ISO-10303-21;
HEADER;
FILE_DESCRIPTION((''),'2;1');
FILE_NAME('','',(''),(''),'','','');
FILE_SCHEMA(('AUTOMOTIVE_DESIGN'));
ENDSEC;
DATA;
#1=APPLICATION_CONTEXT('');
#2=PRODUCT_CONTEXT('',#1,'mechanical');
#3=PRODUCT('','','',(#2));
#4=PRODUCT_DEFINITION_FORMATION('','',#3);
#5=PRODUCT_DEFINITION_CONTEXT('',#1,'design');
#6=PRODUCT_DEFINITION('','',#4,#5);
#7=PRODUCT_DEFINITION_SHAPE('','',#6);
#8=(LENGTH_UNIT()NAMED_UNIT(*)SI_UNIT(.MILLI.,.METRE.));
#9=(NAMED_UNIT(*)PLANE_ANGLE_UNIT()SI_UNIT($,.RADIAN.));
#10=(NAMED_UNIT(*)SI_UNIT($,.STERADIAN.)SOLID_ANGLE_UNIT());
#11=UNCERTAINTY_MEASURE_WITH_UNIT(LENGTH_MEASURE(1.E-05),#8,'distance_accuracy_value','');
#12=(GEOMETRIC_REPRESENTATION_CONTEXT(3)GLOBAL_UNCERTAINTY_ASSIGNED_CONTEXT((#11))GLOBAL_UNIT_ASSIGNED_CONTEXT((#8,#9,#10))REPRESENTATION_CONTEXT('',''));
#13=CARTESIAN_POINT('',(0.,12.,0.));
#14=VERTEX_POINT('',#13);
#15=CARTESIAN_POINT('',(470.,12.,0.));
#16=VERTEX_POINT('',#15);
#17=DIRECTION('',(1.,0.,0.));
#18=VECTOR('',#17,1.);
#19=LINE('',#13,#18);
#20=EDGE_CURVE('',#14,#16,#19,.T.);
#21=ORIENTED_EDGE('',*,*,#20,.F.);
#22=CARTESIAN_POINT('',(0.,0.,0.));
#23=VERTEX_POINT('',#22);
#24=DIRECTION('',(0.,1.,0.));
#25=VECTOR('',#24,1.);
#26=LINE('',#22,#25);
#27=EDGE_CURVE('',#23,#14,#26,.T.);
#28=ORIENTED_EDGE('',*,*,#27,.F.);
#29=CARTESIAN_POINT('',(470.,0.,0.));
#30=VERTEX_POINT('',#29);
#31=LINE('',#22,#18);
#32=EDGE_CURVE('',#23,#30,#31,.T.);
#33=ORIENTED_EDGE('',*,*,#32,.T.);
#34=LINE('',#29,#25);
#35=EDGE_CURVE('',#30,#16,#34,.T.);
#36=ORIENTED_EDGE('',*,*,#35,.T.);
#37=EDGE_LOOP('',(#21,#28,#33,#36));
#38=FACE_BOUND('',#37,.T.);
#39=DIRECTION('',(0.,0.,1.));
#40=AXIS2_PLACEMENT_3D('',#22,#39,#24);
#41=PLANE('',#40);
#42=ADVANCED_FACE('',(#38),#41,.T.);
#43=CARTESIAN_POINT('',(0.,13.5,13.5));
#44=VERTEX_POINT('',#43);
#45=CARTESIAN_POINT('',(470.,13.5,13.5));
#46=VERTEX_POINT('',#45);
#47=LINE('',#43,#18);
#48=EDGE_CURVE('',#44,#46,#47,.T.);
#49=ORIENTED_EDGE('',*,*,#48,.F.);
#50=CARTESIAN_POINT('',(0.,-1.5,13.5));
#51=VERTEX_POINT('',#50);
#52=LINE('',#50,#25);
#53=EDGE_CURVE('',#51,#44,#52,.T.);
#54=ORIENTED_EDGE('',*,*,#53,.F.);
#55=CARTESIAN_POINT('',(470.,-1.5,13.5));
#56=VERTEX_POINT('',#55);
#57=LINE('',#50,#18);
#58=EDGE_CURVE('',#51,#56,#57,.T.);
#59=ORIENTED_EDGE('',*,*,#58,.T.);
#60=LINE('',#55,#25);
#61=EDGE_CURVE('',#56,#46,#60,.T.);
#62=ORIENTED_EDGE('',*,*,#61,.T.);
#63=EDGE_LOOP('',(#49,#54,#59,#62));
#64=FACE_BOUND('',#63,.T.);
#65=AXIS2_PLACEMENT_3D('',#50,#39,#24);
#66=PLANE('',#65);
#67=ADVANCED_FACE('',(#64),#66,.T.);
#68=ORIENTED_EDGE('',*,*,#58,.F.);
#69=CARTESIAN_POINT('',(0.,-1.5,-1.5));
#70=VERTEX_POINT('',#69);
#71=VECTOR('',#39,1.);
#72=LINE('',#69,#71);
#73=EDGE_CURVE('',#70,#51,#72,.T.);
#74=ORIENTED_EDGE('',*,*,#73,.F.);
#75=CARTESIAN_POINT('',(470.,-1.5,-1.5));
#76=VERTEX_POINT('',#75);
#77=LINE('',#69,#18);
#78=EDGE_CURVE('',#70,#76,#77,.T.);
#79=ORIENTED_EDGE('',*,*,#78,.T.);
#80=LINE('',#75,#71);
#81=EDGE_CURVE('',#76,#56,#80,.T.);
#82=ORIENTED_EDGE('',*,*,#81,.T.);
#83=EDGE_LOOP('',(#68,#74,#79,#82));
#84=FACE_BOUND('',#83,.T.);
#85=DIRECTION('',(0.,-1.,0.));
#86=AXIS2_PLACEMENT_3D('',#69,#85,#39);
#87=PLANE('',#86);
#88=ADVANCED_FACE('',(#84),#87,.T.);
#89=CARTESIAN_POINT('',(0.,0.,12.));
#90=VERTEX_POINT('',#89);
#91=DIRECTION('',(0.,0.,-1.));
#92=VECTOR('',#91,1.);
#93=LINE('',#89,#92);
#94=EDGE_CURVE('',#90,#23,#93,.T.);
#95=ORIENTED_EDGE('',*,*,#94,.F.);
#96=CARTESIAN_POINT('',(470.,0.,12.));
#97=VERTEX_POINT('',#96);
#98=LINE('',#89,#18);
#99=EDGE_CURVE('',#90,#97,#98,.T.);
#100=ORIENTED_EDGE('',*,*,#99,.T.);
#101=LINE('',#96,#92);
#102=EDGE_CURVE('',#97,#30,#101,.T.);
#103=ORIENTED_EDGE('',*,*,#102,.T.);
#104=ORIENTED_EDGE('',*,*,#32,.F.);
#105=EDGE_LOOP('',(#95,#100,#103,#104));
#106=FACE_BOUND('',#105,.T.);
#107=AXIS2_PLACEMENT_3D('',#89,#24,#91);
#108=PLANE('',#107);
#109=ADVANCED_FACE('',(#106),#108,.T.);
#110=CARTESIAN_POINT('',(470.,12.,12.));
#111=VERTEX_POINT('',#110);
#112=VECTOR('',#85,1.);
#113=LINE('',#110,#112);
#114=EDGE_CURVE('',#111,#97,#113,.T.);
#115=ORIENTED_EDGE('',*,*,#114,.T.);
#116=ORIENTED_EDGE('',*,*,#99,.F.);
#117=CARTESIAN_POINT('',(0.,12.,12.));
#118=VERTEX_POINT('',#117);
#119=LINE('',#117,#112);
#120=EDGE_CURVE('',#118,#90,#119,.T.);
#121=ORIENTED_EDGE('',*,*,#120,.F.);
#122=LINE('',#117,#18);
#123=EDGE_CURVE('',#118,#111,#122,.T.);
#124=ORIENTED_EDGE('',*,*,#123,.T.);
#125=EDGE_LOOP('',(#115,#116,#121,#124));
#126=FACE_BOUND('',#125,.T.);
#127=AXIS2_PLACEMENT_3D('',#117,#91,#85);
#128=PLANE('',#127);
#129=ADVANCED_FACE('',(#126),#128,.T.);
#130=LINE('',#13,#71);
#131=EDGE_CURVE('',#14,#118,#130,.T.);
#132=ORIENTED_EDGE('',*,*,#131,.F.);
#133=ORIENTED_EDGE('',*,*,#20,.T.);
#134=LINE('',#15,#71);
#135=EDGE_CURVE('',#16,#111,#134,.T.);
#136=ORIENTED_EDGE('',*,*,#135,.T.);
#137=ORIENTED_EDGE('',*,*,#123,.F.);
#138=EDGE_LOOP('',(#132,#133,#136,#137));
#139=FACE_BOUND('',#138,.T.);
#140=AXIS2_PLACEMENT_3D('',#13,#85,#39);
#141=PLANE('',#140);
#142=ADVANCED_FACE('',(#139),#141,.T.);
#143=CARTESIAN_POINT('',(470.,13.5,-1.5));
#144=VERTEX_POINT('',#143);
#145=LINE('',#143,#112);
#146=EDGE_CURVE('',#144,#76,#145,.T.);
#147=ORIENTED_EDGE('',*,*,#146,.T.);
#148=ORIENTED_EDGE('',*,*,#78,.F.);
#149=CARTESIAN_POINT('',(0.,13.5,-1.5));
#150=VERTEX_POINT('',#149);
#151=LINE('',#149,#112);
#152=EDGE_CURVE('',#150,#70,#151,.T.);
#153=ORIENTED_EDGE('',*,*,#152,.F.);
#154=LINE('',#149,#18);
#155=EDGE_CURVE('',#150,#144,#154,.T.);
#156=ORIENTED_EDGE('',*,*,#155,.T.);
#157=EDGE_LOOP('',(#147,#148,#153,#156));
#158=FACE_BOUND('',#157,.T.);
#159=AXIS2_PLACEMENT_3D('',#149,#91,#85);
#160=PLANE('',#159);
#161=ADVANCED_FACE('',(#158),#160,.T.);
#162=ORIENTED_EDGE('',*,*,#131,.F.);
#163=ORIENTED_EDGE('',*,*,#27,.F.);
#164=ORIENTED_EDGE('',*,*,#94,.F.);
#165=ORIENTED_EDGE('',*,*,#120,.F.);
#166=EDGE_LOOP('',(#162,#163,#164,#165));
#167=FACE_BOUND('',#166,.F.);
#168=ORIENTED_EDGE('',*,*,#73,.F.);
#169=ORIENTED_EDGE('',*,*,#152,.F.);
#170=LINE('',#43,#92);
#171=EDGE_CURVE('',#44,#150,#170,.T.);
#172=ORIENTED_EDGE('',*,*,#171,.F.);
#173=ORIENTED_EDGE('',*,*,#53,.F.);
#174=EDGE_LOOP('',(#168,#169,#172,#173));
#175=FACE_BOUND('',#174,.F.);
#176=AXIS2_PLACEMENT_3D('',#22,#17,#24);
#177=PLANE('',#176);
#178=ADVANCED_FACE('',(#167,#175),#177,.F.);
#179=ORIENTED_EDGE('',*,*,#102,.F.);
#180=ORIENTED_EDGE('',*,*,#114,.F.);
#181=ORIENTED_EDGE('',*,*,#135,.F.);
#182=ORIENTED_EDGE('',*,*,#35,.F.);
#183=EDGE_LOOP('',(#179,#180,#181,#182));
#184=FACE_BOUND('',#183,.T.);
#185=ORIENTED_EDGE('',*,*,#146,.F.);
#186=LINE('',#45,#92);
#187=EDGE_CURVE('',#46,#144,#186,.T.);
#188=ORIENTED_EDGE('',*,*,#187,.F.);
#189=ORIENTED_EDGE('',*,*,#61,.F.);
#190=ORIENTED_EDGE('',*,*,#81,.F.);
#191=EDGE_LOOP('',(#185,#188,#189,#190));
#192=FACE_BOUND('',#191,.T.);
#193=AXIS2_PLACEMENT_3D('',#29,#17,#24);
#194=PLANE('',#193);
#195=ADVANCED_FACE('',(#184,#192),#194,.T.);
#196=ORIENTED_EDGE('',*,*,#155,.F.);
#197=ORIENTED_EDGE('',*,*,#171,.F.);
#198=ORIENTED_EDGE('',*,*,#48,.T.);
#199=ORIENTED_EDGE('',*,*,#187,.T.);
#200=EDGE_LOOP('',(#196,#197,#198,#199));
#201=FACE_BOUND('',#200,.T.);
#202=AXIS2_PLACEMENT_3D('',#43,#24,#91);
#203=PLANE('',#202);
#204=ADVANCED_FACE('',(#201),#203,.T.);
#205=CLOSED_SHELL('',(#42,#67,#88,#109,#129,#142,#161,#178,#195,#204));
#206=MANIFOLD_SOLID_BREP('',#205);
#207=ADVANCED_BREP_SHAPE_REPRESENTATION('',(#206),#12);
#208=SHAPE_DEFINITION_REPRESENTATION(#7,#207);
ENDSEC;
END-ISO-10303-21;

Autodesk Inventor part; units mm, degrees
ref_plane "YZ Plane" through (0, 0, 0) normal (1, 0, 0) x (0, 1, 0)
ref_plane "XZ Plane" through (0, 0, 0) normal (0, 1, 0) x (-1, 0, 0)
ref_plane "XY Plane" through (0, 0, 0) normal (0, 0, 1) x (1, 0, 0)
sketch "Sketch1" plane through (0, 0, 0) normal (1, 0, 0) x (0, 1, 0)
  line L0 (0, 0) -> (12, 0)
  line L1 (12, 0) -> (12, 12)
  line L2 (12, 12) -> (0, 12)
  line L3 (0, 12) -> (0, 0)
  line L4 (-1.5, 13.5) -> (13.5, 13.5)
  line L5 (13.5, 13.5) -> (13.5, -1.5)
  line L6 (13.5, -1.5) -> (-1.5, -1.5)
  line L7 (-1.5, -1.5) -> (-1.5, 13.5)
  dimension "d0" = 1.5
  dimension "d1" = 12
  dimension "d2" = 12
extrude "Extrusion1" add sketch "Sketch1" along normal blind 470
equation "\"d0\" = ZártSzelvényFalVastagság"
equation "\"d1\" = ZártSzelvényBelsőÁtmérő"
equation "\"d2\" = ZártSzelvényBelsőÁtmérő"
equation "\"ZártSzelvényFalVastagság\" = 1.5"
equation "\"ZártSzelvényBelsőÁtmérő\" = 12"
equation "\"CsapágyHázKülsőÁtmérő\" = 32"
equation "\"ZártSzelvényKülsőÁtmérő\" = 15"
equation "\"CsapágyBelsőÁtmérő\" = 12"
equation "\"CsapágyKülsőÁtmérő\" = 28"
equation "\"CsapágyHázBelsőÁtmérő\" = 26"
equation "\"CsapágyHázHoszza\" = 45"
equation "\"CsapágySzélesége\" = 8"
properties part number "KétvégenMartSzelvény" material "Acetal Resin, Black"
